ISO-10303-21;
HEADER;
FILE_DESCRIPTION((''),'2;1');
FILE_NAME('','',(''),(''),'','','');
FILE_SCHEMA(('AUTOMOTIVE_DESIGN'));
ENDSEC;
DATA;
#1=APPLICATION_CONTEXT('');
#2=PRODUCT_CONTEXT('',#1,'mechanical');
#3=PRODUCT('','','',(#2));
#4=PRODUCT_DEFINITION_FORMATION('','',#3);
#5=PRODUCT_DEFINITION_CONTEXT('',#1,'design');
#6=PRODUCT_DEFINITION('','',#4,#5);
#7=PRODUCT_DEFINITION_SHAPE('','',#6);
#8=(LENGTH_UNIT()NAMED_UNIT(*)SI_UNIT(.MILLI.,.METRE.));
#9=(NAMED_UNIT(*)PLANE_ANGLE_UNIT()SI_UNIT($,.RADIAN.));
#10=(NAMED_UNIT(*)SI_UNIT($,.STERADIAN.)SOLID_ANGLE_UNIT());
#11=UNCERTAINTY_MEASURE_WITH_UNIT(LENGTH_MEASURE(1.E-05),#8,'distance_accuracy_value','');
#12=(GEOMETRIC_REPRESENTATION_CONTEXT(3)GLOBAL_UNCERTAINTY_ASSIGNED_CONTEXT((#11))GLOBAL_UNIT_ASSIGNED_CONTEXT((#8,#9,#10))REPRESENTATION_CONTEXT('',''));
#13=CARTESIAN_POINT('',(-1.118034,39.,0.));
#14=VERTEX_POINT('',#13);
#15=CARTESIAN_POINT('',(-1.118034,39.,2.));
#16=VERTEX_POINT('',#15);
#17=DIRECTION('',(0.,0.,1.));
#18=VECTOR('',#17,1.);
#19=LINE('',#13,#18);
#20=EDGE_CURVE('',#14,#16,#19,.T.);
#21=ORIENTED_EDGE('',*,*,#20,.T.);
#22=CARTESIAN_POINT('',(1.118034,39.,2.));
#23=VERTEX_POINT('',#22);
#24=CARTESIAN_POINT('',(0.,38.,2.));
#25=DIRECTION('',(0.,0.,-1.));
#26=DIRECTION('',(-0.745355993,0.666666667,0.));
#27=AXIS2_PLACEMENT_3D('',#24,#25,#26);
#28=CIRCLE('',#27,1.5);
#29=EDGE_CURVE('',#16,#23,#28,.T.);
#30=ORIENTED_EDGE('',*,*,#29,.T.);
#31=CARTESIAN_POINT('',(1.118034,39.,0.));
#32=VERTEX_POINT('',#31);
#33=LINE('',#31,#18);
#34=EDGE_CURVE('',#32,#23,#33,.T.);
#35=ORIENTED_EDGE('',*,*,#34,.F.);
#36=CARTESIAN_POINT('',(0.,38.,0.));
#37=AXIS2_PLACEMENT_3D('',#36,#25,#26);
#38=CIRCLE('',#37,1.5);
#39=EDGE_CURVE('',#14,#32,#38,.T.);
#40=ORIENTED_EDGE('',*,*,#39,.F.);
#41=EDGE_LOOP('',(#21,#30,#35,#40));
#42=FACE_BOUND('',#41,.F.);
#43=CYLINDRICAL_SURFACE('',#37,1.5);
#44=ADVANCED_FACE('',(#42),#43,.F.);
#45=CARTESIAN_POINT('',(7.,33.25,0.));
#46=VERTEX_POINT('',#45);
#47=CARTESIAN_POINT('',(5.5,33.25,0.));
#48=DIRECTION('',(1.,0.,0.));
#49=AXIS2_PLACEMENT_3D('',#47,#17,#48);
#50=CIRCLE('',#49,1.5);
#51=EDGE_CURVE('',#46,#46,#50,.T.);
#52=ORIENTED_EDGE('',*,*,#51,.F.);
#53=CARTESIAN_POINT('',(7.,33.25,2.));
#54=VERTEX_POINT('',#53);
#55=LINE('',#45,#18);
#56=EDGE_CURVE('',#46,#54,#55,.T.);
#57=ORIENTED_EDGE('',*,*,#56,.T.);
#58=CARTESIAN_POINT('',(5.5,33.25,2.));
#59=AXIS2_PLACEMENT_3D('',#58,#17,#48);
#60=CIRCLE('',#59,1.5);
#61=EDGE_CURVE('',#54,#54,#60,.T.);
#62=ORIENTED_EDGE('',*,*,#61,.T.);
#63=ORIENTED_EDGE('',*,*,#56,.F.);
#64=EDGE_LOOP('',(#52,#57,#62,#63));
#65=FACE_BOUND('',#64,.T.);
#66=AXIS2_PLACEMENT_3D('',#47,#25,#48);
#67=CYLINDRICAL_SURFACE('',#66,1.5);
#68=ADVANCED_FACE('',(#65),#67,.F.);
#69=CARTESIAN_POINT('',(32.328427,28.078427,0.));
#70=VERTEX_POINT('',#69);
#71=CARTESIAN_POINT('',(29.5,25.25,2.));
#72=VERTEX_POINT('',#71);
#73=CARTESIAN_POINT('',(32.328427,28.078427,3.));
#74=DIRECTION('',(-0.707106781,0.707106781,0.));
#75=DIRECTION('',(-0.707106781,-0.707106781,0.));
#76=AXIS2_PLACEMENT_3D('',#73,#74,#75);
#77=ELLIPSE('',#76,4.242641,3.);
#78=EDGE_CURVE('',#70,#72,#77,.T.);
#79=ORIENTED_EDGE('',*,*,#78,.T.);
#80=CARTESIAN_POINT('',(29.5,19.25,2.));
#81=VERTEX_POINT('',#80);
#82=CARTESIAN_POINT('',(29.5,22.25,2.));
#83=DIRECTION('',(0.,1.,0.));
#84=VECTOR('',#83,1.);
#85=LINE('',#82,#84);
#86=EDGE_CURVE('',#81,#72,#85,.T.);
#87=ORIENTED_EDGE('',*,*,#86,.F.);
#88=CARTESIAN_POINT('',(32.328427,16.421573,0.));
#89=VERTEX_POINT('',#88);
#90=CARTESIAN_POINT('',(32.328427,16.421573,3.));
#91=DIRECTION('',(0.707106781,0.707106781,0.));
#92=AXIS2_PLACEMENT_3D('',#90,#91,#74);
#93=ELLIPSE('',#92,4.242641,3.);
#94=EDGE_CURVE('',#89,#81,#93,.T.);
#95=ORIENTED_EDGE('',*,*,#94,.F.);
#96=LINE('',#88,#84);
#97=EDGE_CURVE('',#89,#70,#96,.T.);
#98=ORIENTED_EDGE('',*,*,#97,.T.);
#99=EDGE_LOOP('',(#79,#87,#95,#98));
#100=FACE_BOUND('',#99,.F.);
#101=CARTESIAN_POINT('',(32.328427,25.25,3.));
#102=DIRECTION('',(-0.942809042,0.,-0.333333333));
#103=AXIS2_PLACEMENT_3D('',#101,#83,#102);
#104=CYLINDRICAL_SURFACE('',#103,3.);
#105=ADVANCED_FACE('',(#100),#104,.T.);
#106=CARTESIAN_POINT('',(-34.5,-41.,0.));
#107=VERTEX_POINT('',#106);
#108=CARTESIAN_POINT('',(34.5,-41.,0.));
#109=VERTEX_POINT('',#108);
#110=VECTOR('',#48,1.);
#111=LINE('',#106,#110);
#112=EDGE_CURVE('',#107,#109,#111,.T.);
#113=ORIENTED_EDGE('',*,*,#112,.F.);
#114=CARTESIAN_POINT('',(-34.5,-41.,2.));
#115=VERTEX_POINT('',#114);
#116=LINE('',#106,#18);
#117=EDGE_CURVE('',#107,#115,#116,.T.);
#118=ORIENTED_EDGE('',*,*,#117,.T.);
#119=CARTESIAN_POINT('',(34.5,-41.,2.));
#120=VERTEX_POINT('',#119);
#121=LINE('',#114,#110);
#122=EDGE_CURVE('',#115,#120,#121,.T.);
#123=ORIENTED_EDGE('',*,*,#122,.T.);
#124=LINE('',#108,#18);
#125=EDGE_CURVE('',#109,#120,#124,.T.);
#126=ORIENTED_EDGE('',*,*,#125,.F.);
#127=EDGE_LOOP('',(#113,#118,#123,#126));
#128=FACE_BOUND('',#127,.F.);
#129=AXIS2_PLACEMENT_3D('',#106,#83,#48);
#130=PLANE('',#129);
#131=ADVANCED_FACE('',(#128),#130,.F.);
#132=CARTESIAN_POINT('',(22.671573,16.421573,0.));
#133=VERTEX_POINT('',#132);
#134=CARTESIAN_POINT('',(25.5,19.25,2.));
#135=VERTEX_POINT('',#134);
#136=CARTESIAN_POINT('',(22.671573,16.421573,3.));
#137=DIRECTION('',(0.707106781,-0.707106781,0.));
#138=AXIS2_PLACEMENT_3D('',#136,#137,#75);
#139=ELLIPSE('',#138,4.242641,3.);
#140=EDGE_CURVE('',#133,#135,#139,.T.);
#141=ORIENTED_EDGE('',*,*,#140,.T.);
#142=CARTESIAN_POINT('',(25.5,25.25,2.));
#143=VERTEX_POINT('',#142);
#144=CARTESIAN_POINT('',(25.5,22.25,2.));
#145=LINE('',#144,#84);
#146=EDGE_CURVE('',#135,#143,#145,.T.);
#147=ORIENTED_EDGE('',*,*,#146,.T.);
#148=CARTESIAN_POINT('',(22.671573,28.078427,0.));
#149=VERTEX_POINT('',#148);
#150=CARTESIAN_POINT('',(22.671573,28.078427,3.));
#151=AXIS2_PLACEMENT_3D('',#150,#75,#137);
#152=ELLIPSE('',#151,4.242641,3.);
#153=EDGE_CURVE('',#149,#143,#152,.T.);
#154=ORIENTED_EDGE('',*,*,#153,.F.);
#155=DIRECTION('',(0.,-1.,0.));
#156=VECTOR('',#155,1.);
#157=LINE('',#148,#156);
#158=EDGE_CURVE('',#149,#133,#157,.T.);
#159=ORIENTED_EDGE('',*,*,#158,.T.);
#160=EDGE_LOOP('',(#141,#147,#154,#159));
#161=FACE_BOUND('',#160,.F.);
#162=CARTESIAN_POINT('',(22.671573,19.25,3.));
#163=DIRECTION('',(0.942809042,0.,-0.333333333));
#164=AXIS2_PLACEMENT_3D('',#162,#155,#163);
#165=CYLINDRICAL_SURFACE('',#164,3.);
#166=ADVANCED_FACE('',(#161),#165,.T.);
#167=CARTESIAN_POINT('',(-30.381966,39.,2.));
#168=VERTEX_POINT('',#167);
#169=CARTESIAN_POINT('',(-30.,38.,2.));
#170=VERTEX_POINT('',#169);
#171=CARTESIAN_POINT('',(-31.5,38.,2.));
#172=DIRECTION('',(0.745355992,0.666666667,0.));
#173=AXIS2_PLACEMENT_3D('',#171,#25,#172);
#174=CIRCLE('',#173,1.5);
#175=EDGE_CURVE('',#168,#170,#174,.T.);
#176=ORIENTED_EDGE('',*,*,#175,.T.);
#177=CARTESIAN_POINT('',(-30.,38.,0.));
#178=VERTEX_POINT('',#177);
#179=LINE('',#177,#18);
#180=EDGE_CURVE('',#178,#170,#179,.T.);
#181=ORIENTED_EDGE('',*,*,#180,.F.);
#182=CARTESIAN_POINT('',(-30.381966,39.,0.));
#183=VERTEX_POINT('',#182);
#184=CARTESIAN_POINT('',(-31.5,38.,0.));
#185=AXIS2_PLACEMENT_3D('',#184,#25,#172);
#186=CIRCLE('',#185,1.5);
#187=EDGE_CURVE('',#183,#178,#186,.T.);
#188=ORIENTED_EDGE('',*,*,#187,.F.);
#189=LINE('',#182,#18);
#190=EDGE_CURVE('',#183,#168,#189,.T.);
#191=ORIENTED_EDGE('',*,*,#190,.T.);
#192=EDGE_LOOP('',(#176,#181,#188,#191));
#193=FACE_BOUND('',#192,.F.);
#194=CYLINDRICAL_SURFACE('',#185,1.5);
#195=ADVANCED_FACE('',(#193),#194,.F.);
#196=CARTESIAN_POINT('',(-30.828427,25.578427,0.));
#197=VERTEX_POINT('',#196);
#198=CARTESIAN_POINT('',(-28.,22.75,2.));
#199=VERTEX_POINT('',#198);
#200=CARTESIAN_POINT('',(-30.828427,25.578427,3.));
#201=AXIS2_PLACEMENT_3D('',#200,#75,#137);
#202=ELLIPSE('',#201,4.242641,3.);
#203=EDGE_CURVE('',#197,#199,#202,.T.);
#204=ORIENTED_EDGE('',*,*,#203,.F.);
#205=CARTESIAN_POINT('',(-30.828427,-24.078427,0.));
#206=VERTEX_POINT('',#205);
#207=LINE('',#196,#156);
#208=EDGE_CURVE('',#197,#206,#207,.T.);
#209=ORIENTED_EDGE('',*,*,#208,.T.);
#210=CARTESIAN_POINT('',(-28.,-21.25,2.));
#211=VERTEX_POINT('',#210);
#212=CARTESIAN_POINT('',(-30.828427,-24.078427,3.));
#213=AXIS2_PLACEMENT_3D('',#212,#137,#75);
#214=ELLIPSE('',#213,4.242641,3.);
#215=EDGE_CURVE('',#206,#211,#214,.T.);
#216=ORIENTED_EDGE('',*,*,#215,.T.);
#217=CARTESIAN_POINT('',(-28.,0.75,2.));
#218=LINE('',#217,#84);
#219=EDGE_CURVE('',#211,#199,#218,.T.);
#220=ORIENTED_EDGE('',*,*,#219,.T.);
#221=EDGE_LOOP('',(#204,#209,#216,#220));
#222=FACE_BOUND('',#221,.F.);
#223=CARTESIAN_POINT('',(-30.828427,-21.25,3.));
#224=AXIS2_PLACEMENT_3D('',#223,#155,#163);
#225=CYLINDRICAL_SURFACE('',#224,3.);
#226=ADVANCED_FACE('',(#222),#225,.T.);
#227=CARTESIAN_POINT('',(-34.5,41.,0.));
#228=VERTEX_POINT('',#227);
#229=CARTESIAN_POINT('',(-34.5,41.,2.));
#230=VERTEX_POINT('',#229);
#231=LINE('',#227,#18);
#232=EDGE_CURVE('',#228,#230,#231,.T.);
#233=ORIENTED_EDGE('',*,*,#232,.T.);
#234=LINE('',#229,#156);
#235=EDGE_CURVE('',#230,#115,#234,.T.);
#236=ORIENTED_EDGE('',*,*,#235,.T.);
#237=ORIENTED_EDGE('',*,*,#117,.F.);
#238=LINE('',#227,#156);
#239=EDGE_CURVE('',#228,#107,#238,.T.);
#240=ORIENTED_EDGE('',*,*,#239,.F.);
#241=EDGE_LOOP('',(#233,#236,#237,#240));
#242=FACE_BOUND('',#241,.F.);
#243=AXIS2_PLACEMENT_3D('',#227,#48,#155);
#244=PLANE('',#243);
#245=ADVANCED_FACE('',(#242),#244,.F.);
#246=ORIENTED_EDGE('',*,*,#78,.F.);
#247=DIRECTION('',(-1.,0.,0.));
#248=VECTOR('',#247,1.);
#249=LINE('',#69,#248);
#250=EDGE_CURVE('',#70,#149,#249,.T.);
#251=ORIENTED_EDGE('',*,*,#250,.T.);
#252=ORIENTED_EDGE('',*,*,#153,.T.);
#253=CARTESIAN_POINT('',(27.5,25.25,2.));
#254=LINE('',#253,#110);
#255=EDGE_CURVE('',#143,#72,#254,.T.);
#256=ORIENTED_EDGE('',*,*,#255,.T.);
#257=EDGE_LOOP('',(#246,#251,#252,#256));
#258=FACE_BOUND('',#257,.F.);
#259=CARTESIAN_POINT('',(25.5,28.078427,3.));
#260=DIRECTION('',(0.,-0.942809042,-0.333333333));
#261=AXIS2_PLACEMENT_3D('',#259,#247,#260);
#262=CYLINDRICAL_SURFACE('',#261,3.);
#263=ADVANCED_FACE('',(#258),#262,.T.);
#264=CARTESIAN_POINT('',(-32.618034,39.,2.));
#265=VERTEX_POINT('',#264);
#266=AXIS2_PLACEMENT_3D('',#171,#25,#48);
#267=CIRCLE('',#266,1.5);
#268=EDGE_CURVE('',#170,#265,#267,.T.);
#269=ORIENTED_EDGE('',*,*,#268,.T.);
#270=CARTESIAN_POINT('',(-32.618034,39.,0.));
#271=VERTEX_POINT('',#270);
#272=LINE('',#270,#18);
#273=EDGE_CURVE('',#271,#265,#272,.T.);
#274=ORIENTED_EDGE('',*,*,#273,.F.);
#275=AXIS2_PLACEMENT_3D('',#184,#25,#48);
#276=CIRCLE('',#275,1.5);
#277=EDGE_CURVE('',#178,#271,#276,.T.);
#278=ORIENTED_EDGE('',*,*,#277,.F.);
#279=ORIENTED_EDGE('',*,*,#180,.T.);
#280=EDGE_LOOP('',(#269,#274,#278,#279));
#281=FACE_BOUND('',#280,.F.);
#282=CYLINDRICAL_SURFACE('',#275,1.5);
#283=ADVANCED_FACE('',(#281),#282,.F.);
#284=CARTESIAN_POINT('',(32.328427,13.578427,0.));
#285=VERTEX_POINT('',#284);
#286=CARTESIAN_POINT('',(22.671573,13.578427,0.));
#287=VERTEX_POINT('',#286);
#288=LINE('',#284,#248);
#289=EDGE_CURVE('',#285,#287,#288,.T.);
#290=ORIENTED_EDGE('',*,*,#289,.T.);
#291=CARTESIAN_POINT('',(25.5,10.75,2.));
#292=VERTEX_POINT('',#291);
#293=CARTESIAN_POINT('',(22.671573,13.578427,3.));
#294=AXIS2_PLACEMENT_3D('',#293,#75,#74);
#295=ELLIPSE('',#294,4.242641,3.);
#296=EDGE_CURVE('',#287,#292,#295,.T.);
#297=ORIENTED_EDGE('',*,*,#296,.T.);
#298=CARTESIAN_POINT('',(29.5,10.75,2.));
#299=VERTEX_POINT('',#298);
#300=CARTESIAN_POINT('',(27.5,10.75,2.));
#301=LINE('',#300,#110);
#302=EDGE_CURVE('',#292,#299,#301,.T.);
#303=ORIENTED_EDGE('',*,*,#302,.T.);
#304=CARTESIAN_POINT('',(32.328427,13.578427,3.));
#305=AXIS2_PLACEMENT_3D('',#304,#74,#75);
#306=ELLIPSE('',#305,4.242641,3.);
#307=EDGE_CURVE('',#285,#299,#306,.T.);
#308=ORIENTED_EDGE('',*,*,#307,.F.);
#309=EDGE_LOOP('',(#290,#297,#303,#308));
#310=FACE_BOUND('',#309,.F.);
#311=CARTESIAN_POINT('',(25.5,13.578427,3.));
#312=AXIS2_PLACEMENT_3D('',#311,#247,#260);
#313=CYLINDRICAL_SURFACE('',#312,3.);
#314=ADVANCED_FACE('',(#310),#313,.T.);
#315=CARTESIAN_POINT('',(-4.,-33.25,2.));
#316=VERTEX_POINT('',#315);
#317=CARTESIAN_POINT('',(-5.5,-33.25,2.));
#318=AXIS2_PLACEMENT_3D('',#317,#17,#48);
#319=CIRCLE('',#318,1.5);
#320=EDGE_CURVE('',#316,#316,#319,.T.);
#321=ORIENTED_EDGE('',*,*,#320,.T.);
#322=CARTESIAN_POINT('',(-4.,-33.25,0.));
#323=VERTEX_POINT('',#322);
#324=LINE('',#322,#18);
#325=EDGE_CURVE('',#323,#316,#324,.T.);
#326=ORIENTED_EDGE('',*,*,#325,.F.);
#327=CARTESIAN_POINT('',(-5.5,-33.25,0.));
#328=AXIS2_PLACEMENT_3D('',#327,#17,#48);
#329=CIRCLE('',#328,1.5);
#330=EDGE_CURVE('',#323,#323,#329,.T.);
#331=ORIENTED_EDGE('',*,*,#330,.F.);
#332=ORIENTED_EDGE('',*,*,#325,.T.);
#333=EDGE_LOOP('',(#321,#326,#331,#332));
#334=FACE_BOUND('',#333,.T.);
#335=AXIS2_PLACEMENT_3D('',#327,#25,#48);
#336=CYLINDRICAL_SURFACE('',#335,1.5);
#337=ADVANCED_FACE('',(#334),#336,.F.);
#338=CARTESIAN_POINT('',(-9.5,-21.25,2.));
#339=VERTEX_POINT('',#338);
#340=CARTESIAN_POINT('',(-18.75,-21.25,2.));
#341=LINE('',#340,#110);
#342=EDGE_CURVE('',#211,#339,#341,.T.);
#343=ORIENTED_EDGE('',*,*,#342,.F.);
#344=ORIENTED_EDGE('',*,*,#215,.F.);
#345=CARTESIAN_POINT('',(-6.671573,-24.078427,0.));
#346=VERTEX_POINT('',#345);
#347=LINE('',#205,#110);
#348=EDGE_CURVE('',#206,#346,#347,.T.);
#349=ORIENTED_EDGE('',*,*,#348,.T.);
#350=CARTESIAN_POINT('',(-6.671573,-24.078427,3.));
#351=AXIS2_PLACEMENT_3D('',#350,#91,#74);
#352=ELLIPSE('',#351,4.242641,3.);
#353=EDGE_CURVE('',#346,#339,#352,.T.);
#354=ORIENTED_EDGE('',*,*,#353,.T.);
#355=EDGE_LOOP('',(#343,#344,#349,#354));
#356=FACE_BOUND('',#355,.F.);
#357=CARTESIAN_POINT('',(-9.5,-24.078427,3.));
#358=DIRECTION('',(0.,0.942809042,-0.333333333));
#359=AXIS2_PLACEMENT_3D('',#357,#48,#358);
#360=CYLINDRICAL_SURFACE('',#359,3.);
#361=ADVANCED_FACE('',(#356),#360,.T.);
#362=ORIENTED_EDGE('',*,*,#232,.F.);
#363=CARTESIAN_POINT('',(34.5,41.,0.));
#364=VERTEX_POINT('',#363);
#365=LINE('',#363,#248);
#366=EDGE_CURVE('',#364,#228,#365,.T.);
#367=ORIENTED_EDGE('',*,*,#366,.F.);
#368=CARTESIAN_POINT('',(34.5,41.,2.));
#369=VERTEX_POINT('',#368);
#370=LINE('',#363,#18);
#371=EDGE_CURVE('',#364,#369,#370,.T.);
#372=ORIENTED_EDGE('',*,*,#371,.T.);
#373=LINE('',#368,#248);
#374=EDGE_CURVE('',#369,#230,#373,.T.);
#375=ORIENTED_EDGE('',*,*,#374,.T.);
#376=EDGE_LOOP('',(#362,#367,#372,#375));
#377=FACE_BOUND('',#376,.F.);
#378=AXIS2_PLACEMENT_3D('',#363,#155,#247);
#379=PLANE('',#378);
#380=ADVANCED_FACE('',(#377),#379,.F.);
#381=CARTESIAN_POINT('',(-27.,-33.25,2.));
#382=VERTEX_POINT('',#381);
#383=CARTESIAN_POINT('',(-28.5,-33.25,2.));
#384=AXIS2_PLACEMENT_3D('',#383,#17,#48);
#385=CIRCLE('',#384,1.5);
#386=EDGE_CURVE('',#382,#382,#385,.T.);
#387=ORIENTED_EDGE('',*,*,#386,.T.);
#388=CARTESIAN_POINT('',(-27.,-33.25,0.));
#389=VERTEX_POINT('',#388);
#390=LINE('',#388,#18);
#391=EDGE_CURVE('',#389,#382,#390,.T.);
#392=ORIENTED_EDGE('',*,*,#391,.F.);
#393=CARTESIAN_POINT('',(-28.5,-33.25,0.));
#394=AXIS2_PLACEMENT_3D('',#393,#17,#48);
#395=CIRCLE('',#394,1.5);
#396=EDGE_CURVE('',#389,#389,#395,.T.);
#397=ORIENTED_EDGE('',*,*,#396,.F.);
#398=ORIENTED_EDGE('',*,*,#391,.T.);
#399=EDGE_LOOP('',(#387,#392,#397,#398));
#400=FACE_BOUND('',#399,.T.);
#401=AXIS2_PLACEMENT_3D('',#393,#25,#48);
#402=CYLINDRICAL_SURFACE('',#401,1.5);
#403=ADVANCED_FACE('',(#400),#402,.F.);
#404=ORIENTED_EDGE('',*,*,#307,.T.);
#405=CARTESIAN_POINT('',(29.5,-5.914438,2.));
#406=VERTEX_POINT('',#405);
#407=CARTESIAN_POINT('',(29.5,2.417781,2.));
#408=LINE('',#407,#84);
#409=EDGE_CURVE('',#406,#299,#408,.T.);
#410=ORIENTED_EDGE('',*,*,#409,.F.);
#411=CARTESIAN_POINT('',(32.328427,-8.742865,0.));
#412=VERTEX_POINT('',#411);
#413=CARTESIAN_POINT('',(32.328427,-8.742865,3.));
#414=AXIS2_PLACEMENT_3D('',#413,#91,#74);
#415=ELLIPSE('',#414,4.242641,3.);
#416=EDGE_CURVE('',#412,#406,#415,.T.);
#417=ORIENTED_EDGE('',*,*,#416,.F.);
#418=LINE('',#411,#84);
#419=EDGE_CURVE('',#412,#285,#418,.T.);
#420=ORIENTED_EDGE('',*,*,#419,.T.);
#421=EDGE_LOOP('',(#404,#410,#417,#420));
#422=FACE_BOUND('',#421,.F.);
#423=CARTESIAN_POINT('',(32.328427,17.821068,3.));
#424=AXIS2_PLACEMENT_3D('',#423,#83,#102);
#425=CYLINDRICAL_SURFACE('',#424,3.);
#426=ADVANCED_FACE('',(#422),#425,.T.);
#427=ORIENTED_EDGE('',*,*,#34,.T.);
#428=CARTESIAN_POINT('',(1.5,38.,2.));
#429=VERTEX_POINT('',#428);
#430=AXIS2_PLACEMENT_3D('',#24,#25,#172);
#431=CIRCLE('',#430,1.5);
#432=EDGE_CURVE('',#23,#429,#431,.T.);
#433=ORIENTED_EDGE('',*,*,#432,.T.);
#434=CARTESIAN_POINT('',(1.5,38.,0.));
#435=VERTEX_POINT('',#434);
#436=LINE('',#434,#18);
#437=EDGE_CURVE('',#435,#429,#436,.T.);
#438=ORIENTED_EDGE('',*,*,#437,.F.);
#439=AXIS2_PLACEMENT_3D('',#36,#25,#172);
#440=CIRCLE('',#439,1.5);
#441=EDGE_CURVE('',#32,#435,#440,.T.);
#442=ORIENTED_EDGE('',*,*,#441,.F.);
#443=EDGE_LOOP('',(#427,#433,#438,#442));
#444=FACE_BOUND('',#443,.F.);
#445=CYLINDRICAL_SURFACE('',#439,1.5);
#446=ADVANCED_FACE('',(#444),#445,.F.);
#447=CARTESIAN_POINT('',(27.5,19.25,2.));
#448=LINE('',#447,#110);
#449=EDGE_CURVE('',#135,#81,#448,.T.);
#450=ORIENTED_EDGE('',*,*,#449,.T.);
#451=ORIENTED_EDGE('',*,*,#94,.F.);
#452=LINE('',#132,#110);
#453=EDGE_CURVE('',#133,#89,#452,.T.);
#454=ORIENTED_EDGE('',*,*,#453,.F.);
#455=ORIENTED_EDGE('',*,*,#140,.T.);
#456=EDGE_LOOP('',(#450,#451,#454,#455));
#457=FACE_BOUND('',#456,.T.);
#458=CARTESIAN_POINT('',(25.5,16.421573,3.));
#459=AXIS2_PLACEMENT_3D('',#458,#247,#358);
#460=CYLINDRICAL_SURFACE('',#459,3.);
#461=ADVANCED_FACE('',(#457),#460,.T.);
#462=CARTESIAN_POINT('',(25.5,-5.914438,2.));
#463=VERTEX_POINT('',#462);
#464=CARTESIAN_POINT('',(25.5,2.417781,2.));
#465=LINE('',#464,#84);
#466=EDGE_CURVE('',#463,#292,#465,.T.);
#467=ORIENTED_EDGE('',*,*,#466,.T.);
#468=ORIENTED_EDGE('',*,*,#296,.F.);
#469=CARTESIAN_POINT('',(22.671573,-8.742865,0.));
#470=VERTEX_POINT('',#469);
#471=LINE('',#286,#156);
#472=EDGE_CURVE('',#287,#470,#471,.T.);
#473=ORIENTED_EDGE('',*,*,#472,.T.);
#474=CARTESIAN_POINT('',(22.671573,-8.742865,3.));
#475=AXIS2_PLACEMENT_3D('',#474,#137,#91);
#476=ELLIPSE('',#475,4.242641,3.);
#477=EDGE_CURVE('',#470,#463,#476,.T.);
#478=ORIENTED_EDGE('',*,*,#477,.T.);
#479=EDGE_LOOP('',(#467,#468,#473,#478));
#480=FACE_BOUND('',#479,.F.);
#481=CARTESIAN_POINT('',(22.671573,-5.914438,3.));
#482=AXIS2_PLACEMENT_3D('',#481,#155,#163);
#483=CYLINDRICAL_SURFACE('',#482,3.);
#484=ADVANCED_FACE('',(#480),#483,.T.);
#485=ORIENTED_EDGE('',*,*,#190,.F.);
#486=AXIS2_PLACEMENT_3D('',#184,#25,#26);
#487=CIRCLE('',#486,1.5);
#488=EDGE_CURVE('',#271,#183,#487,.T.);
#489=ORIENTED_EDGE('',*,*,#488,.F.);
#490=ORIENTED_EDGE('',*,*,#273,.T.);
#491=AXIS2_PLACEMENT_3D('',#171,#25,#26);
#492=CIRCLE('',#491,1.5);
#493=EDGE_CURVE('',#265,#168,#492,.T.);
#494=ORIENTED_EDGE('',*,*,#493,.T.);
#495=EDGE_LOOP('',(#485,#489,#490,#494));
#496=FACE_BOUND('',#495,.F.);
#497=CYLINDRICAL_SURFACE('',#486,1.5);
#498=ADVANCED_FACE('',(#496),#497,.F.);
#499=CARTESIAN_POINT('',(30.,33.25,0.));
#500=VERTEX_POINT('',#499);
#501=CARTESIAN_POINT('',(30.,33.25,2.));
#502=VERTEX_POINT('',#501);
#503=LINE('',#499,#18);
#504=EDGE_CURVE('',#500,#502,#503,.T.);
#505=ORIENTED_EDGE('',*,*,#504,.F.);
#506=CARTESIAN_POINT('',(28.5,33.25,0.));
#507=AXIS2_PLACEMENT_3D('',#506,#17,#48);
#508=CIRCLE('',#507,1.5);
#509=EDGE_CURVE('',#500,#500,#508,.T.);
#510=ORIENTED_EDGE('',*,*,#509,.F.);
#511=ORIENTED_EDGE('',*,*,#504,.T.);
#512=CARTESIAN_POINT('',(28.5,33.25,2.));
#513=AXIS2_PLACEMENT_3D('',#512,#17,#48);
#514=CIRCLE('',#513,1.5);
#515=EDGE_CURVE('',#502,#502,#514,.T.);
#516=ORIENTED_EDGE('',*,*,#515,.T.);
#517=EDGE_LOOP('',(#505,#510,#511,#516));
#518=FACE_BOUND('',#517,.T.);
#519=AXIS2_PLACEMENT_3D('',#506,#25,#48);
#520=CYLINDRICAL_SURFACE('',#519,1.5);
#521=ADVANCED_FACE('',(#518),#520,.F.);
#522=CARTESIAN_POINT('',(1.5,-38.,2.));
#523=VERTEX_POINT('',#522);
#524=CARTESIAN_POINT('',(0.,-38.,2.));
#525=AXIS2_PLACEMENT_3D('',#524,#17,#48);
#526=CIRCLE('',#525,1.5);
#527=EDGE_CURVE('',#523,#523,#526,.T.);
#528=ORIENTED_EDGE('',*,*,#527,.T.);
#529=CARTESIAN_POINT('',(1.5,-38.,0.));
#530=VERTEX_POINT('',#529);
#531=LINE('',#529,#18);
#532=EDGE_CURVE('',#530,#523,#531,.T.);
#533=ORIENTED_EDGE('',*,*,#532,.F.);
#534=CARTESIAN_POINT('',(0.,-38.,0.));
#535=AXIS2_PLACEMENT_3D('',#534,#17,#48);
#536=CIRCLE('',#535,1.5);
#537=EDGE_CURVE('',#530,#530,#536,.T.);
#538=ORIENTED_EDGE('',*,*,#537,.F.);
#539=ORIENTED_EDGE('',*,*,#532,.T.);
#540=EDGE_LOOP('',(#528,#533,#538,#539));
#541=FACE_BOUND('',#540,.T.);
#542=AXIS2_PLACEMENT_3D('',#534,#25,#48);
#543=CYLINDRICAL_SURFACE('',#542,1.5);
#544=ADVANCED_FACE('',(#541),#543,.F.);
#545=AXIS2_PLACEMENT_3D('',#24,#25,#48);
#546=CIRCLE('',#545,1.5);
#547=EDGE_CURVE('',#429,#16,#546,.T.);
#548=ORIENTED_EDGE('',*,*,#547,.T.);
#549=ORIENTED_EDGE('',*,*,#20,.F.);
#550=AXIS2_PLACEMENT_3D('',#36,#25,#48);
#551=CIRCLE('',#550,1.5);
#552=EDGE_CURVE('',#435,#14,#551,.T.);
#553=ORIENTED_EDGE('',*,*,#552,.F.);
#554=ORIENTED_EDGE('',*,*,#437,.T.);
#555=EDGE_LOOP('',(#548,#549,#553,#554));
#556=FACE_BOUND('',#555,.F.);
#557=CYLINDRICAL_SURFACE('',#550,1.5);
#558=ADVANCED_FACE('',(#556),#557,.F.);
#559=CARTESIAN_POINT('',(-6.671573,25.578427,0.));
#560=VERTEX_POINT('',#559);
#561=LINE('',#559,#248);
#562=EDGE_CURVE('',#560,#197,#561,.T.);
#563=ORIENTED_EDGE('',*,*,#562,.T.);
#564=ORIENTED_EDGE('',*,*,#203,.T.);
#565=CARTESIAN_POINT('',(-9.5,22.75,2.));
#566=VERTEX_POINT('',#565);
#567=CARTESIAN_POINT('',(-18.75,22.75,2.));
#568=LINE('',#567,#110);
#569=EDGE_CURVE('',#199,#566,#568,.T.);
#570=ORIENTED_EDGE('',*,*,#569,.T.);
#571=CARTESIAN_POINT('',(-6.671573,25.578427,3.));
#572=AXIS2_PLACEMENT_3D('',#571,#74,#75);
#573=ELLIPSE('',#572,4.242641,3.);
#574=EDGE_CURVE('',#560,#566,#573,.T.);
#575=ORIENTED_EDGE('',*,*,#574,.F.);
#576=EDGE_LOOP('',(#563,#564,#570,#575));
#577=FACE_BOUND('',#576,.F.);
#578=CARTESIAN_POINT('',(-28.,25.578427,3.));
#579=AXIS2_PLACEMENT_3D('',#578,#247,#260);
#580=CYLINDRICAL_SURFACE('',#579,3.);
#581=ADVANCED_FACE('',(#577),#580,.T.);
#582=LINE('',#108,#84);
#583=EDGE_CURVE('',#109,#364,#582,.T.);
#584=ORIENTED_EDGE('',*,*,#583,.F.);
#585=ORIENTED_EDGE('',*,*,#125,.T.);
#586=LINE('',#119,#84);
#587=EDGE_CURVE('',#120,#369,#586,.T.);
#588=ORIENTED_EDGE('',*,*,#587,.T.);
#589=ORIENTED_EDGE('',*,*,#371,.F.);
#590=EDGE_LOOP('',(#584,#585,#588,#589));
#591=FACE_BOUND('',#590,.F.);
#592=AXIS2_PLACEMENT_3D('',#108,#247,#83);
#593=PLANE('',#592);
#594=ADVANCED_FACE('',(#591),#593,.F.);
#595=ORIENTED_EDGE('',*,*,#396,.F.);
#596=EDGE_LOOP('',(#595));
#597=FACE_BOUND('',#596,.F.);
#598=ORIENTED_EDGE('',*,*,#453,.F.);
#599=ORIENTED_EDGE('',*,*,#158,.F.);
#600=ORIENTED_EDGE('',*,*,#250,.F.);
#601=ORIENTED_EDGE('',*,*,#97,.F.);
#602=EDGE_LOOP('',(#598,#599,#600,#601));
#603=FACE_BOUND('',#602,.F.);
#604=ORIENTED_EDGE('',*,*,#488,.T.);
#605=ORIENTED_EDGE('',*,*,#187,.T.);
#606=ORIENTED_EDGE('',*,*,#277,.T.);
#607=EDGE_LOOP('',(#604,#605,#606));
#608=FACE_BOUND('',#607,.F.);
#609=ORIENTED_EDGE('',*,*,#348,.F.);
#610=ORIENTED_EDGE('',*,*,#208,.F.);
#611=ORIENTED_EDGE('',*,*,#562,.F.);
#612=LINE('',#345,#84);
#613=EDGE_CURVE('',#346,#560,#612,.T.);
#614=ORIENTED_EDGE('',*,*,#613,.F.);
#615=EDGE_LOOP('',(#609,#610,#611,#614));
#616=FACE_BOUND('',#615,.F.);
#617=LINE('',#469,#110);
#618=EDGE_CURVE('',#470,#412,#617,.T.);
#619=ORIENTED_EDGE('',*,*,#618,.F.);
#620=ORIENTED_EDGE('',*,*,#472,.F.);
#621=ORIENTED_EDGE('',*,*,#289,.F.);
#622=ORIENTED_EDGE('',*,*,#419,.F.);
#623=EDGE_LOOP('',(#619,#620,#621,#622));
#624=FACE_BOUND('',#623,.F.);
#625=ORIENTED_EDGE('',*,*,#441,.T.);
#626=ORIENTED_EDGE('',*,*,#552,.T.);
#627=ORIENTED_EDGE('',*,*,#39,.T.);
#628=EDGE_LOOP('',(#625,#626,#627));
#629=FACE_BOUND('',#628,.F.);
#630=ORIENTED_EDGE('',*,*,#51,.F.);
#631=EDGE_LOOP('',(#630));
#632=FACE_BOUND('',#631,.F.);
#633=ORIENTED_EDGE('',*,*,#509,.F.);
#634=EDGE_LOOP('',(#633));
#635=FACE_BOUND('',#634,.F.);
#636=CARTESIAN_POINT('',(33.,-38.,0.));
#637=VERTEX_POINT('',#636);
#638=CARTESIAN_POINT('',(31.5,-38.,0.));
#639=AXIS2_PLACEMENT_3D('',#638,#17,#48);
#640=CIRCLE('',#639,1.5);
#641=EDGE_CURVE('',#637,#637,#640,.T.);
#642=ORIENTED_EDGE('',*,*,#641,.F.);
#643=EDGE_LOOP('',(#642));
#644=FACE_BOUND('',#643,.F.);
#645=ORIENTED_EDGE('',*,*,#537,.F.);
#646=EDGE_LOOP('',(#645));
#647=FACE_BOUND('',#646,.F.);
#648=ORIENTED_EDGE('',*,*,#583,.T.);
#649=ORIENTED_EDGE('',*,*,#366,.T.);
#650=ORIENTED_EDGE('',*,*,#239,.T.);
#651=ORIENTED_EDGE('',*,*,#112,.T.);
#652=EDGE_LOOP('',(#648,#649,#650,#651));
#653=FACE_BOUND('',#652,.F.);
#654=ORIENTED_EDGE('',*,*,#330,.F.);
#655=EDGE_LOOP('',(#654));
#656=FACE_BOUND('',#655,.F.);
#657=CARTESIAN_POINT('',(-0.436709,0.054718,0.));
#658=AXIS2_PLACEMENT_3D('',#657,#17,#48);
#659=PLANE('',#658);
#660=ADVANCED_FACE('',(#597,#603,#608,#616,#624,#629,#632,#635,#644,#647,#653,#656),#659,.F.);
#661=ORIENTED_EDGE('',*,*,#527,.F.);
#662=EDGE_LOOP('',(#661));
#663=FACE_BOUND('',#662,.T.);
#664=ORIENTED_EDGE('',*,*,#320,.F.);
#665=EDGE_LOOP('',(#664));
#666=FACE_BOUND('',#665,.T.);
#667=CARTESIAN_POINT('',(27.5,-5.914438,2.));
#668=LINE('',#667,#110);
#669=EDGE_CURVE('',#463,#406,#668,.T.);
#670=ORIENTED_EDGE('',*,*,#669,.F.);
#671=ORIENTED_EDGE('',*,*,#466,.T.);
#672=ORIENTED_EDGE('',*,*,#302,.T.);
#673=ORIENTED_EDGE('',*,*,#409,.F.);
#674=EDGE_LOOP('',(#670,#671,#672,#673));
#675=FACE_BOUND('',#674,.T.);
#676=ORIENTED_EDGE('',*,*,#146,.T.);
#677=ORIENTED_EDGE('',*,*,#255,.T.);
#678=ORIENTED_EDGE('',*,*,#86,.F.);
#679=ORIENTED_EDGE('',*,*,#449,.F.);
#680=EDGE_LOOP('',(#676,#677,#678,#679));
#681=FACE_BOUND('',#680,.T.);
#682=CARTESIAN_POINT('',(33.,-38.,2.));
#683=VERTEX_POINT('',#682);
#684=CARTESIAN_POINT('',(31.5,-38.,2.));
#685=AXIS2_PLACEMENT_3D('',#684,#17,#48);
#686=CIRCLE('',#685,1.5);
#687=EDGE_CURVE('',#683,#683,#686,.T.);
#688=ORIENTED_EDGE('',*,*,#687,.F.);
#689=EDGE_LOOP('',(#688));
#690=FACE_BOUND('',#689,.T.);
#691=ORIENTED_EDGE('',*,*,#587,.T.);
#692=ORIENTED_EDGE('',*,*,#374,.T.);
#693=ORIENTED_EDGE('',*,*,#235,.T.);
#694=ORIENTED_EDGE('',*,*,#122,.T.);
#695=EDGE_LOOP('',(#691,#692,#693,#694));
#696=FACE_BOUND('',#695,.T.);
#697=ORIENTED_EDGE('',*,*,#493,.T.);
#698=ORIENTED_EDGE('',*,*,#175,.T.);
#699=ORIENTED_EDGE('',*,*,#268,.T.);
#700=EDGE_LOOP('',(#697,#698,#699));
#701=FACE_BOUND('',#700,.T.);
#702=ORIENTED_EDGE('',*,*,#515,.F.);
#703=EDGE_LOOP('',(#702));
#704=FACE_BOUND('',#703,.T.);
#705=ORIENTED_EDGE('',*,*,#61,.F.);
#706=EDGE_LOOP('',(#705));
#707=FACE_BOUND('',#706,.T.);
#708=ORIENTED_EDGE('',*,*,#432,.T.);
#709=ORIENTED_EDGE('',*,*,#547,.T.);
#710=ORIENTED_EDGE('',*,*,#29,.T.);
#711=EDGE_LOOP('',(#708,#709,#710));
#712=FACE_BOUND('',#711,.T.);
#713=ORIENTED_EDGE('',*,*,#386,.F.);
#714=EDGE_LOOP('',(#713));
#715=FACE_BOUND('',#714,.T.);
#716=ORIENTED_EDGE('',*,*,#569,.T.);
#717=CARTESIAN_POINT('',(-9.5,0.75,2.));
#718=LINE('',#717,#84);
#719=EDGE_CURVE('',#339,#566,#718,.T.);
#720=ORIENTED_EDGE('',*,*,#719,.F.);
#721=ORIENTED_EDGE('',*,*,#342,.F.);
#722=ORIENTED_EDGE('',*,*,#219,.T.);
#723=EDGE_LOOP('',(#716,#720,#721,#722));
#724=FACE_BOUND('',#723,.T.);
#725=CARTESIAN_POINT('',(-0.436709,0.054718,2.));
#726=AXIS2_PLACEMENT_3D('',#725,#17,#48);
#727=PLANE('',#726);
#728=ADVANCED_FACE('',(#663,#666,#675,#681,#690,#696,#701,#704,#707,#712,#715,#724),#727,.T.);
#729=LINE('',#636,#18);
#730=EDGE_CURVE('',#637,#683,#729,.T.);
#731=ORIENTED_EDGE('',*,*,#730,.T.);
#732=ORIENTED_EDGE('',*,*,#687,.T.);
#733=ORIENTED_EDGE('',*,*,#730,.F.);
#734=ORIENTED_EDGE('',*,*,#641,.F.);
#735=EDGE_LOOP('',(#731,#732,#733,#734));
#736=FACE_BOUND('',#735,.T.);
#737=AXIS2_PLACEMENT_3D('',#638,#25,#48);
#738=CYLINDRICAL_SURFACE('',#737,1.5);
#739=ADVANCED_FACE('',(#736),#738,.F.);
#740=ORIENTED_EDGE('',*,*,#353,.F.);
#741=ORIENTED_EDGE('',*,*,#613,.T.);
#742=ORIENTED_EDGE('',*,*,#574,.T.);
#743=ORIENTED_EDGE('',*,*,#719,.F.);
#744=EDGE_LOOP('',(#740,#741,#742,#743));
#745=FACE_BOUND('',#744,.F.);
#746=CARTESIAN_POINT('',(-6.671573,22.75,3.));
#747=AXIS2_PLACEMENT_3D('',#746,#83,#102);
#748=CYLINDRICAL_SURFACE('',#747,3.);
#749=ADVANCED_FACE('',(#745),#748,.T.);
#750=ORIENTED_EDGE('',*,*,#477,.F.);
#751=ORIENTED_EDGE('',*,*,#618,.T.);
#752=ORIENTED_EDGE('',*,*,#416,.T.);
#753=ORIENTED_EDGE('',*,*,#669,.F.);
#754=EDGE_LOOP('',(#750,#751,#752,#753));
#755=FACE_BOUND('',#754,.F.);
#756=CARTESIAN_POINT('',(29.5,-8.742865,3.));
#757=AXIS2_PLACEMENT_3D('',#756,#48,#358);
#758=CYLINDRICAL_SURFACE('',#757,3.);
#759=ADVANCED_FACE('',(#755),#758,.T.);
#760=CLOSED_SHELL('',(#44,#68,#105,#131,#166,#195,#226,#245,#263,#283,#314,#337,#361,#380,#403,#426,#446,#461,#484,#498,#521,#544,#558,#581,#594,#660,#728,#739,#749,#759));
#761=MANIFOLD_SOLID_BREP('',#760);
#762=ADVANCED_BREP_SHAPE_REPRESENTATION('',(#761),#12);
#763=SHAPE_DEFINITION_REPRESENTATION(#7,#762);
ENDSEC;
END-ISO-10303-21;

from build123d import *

# Parameters (mm, degrees)
F0_R          = 1.5
F0_W          = 18.5
F0_H          = 44
F0_W_2        = 4
F0_H_2        = 16.6644380502
F0_H_3        = 6
F0_W_3        = 4.7
F0_H_4        = 2
F0_W_4        = 13
F0_W_5        = 2.3
F0_W_6        = 1.5
F0_W_7        = 9
F0_W_8        = 11
F1_DEPTH      = 2
F2_T1_DEPTH   = 16.6644380502
F2_T3_DEPTH   = 4
F2_T5_DEPTH   = 6
F2_T7_DEPTH   = 44
F2_T9_DEPTH   = 18.5
F2_T15_DEPTH  = 11.0710678119
F2_T19_DEPTH  = 23.7355058621
F2_T26_DEPTH  = 11.0710678119
F2_T30_DEPTH  = 23.7355058621
F2_T37_DEPTH  = 23.7355058621
F2_T41_DEPTH  = 11.0710678119
F2_T49_DEPTH  = 11.0710678119
F2_T54_DEPTH  = 23.7355058621
F2_T61_DEPTH  = 13.0710678119
F2_T65_DEPTH  = 11.0710678119
F2_T73_DEPTH  = 13.0710678119
F2_T77_DEPTH  = 11.0710678119
F2_T84_DEPTH  = 11.0710678119
F2_T89_DEPTH  = 13.0710678119
F2_S91_R      = 1.5
F2_T92_DEPTH  = 8
F2_T98_DEPTH  = 13.0710678119
F2_T102_DEPTH = 11.0710678119
F2_T109_DEPTH = 25.5710678119
F2_T113_DEPTH = 51.0710678119
F2_T120_DEPTH = 51.0710678119
F2_T124_DEPTH = 25.5710678119
F2_T131_DEPTH = 51.0710678119
F2_T135_DEPTH = 25.5710678119
F2_T143_DEPTH = 51.0710678119
F2_T147_DEPTH = 25.5710678119


# Not quite as in the source:
# - a fillet or chamfer that OpenCascade refuses, or shapes differently, is made with other operations: its cross-section is extruded or revolved along the edge and cut away or added


with BuildPart() as f1:
    # F0 (on Top) → F1 (new body)
    with BuildSketch(Plane.XY):
        with BuildLine():
            Line((12.5, -41), (34.5, -41))
            Line((34.5, -41), (34.5, 39))
            Line((34.5, 39), (28.5, 39))
            Line((28.5, 39), (25.5, 39))
            Line((25.5, 39), (20.8, 39))
            Line((20.8, 39), (7.8, 39))
            Line((7.8, 39), (5.5, 39))
            Line((5.5, 39), (1.1180339887, 39))
            ThreePointArc((1.1180339887, 39), (1.4012585384, 38.5352331347), (1.5, 38))
            ThreePointArc((1.5, 38), (-0.5352331347, 36.5987414616), (-1.1180339887, 39))
            Line((-1.1180339887, 39), (-5.5, 39))
            Line((-5.5, 39), (-14.5, 39))
            Line((-14.5, 39), (-25.5, 39))
            Line((-25.5, 39), (-27, 39))
            Line((-27, 39), (-28.5, 39))
            Line((-28.5, 39), (-30.3819660113, 39))
            ThreePointArc((-30.3819660113, 39), (-30.0987414616, 38.5352331347), (-30, 38))
            ThreePointArc((-30, 38), (-32.0352331347, 36.5987414616), (-32.6180339887, 39))
            Line((-32.6180339887, 39), (-34.5, 39))
            Line((-34.5, 39), (-34.5, -41))
            Line((-34.5, -41), (-12.5, -41))
            Line((-12.5, -41), (-10.5, -41))
            Line((-10.5, -41), (10.5, -41))
            Line((10.5, -41), (12.5, -41))
        make_face()
        with Locations((-28.5, -33.25)):
            Circle(F0_R, mode=Mode.SUBTRACT)
        with Locations((-5.5, -33.25)):
            Circle(F0_R, mode=Mode.SUBTRACT)
        with Locations((0, -38)):
            Circle(F0_R, mode=Mode.SUBTRACT)
        with Locations((31.5, -38)):
            Circle(F0_R, mode=Mode.SUBTRACT)
        with Locations((-18.75, 0.75)):
            Rectangle(F0_W, F0_H, mode=Mode.SUBTRACT)
        with Locations((-28.5, 33.25)):
            Circle(F0_R, mode=Mode.SUBTRACT)
        with Locations((-5.5, 33.25)):
            Circle(F0_R, mode=Mode.SUBTRACT)
        with Locations((27.5, 2.4177809749)):
            Rectangle(F0_W_2, F0_H_2, mode=Mode.SUBTRACT)
        with Locations((5.5, 33.25)):
            Circle(F0_R, mode=Mode.SUBTRACT)
        with Locations((27.5, 22.25)):
            Rectangle(F0_W_2, F0_H_3, mode=Mode.SUBTRACT)
        with Locations((28.5, 33.25)):
            Circle(F0_R, mode=Mode.SUBTRACT)
        Polygon((28.5, 39), (34.5, 39), (34.5, 41), (28, 41), (25.5, 41), (25.5, 39), align=None)
        with Locations((23.15, 40)):
            Rectangle(F0_W_3, F0_H_4)
        with Locations((14.3, 40)):
            Rectangle(F0_W_4, F0_H_4)
        with Locations((6.65, 40)):
            Rectangle(F0_W_5, F0_H_4)
        with BuildLine():
            Line((-34.5, 41), (-34.5, 39))
            Line((-34.5, 39), (-32.6180339887, 39))
            ThreePointArc((-32.6180339887, 39), (-31.5, 39.5), (-30.3819660113, 39))
            Line((-30.3819660113, 39), (-28.5, 39))
            Line((-28.5, 39), (-27, 39))
            Line((-27, 39), (-27, 41))
            Line((-27, 41), (-34.5, 41))
        make_face()
        with BuildLine():
            Line((1.1180339887, 39), (5.5, 39))
            Line((5.5, 39), (5.5, 41))
            Line((5.5, 41), (-5.5, 41))
            Line((-5.5, 41), (-5.5, 39))
            Line((-5.5, 39), (-1.1180339887, 39))
            ThreePointArc((-1.1180339887, 39), (0, 39.5), (1.1180339887, 39))
        make_face()
        with Locations((-26.25, 40)):
            Rectangle(F0_W_6, F0_H_4)
        with Locations((-10, 40)):
            Rectangle(F0_W_7, F0_H_4)
        with Locations((-20, 40)):
            Rectangle(F0_W_8, F0_H_4)
        with Locations((-28.5, 33.25)):
            Circle(F0_R)
        with Locations((-5.5, 33.25)):
            Circle(F0_R)
    extrude(amount=F1_DEPTH)

    # F2: fillet of radius 3 on 12 edges, made by hand

    # F2_s2 → F2_t1 (cut)
    with BuildSketch(Plane.XZ.offset(-10.75)):
        with BuildLine():
            ThreePointArc((25.5, 2), (24.4036236828, 0.5505102572), (22.6715728753, 0))
            Line((22.6715728753, 0), (25.5, 0))
            Line((25.5, 0), (25.5, 2))
        make_face()
        with BuildLine():
            ThreePointArc((29.5, 2), (30.5963763172, 0.5505102572), (32.3284271247, 0))
            Line((32.3284271247, 0), (29.5, 0))
            Line((29.5, 0), (29.5, 2))
        make_face()
    extrude(amount=F2_T1_DEPTH, mode=Mode.SUBTRACT)

    # F2_s4 → F2_t3 (cut)
    with BuildSketch(Plane.YZ.offset(25.5)):
        with BuildLine():
            ThreePointArc((-5.9144380502, 2), (-7.0108143674, 0.5505102572), (-8.742865175, 0))
            Line((-8.742865175, 0), (-5.9144380502, 0))
            Line((-5.9144380502, 0), (-5.9144380502, 2))
        make_face()
        with BuildLine():
            ThreePointArc((10.75, 2), (11.8463763172, 0.5505102572), (13.5784271247, 0))
            Line((13.5784271247, 0), (10.75, 0))
            Line((10.75, 0), (10.75, 2))
        make_face()
        with BuildLine():
            ThreePointArc((19.25, 2), (18.1536236828, 0.5505102572), (16.4215728753, 0))
            Line((16.4215728753, 0), (19.25, 0))
            Line((19.25, 0), (19.25, 2))
        make_face()
        with BuildLine():
            ThreePointArc((25.25, 2), (26.3463763172, 0.5505102572), (28.0784271247, 0))
            Line((28.0784271247, 0), (25.25, 0))
            Line((25.25, 0), (25.25, 2))
        make_face()
    extrude(amount=F2_T3_DEPTH, mode=Mode.SUBTRACT)

    # F2_s6 → F2_t5 (cut)
    with BuildSketch(Plane.XZ.offset(-25.25)):
        with BuildLine():
            ThreePointArc((29.5, 2), (30.5963763172, 0.5505102572), (32.3284271247, 0))
            Line((32.3284271247, 0), (29.5, 0))
            Line((29.5, 0), (29.5, 2))
        make_face()
        with BuildLine():
            ThreePointArc((25.5, 2), (24.4036236828, 0.5505102572), (22.6715728753, 0))
            Line((22.6715728753, 0), (25.5, 0))
            Line((25.5, 0), (25.5, 2))
        make_face()
    extrude(amount=F2_T5_DEPTH, mode=Mode.SUBTRACT)

    # F2_s8 → F2_t7 (cut)
    with BuildSketch(Plane.XZ.offset(-22.75)):
        with BuildLine():
            ThreePointArc((-9.5, 2), (-8.4036236828, 0.5505102572), (-6.6715728753, 0))
            Line((-6.6715728753, 0), (-9.5, 0))
            Line((-9.5, 0), (-9.5, 2))
        make_face()
        with BuildLine():
            ThreePointArc((-28, 2), (-29.0963763172, 0.5505102572), (-30.8284271247, 0))
            Line((-30.8284271247, 0), (-28, 0))
            Line((-28, 0), (-28, 2))
        make_face()
    extrude(amount=F2_T7_DEPTH, mode=Mode.SUBTRACT)

    # F2_s10 → F2_t9 (cut)
    with BuildSketch(Plane.YZ.offset(-28)):
        with BuildLine():
            ThreePointArc((-21.25, 2), (-22.3463763172, 0.5505102572), (-24.0784271247, 0))
            Line((-24.0784271247, 0), (-21.25, 0))
            Line((-21.25, 0), (-21.25, 2))
        make_face()
        with BuildLine():
            ThreePointArc((22.75, 2), (23.8463763172, 0.5505102572), (25.5784271247, 0))
            Line((25.5784271247, 0), (22.75, 0))
            Line((22.75, 0), (22.75, 2))
        make_face()
    extrude(amount=F2_T9_DEPTH, mode=Mode.SUBTRACT)


with BuildPart() as f2_tool13:
    # F2_s14 → F2_t15 (new body)
    with BuildSketch(Plane.YZ.offset(29.5)):
        with BuildLine():
            ThreePointArc((-5.9144380502, 2), (-7.0108143674, 0.5505102572), (-8.742865175, 0))
            Line((-8.742865175, 0), (-5.9144380502, 0))
            Line((-5.9144380502, 0), (-5.9144380502, 2))
        make_face()
    extrude(amount=-F2_T15_DEPTH)

    split(bisect_by=Plane.YZ.offset(25.5), keep=Keep.BOTTOM)


with BuildPart() as f2_tool17:
    # F2_s18 → F2_t19 (new body)
    with BuildSketch(Plane.XZ.offset(12.9855058621)):
        with BuildLine():
            ThreePointArc((25.5, 2), (24.4036236828, 0.5505102572), (22.6715728753, 0))
            Line((22.6715728753, 0), (25.5, 0))
            Line((25.5, 0), (25.5, 2))
        make_face()
    extrude(amount=-F2_T19_DEPTH)

    split(bisect_by=Plane.XZ.offset(5.9144380502), keep=Keep.TOP)


with BuildPart() as f2_tool13_1:
    add(f2_tool13.part)

    # F2_t21: intersect F2_tool17
    add(f2_tool17.part, mode=Mode.INTERSECT)


with BuildPart() as f1_1:
    add(f1.part)

    # F2_t11: cut F2_tool13
    add(f2_tool13_1.part, mode=Mode.SUBTRACT)


with BuildPart() as f2_tool24:
    # F2_s25 → F2_t26 (new body)
    with BuildSketch(Plane.YZ.offset(18.4289321881)):
        with BuildLine():
            ThreePointArc((10.75, 2), (11.8463763172, 0.5505102572), (13.5784271247, 0))
            Line((13.5784271247, 0), (10.75, 0))
            Line((10.75, 0), (10.75, 2))
        make_face()
    extrude(amount=F2_T26_DEPTH)

    split(bisect_by=Plane.YZ.offset(25.5), keep=Keep.BOTTOM)


with BuildPart() as f2_tool28:
    # F2_s29 → F2_t30 (new body)
    with BuildSketch(Plane.XZ.offset(5.9144380502)):
        with BuildLine():
            ThreePointArc((25.5, 2), (24.4036236828, 0.5505102572), (22.6715728753, 0))
            Line((22.6715728753, 0), (25.5, 0))
            Line((25.5, 0), (25.5, 2))
        make_face()
    extrude(amount=-F2_T30_DEPTH)

    split(bisect_by=Plane.XZ.offset(-10.75), keep=Keep.BOTTOM)


with BuildPart() as f2_tool24_1:
    add(f2_tool24.part)

    # F2_t32: intersect F2_tool28
    add(f2_tool28.part, mode=Mode.INTERSECT)


with BuildPart() as f1_2:
    add(f1_1.part)

    # F2_t22: cut F2_tool24
    add(f2_tool24_1.part, mode=Mode.SUBTRACT)


with BuildPart() as f2_tool35:
    # F2_s36 → F2_t37 (new body)
    with BuildSketch(Plane.XZ.offset(-10.75)):
        with BuildLine():
            ThreePointArc((29.5, 2), (30.5963763172, 0.5505102572), (32.3284271247, 0))
            Line((32.3284271247, 0), (29.5, 0))
            Line((29.5, 0), (29.5, 2))
        make_face()
    extrude(amount=F2_T37_DEPTH)

    split(bisect_by=Plane.XZ.offset(5.9144380502), keep=Keep.TOP)


with BuildPart() as f2_tool39:
    # F2_s40 → F2_t41 (new body)
    with BuildSketch(Plane.YZ.offset(36.5710678119)):
        with BuildLine():
            ThreePointArc((-5.9144380502, 2), (-7.0108143674, 0.5505102572), (-8.742865175, 0))
            Line((-8.742865175, 0), (-5.9144380502, 0))
            Line((-5.9144380502, 0), (-5.9144380502, 2))
        make_face()
    extrude(amount=-F2_T41_DEPTH)

    split(bisect_by=Plane.YZ.offset(34.5), keep=Keep.BOTTOM)

    split(bisect_by=Plane.YZ.offset(29.5), keep=Keep.TOP)


with BuildPart() as f2_tool35_1:
    add(f2_tool35.part)

    # F2_t44: intersect F2_tool39
    add(f2_tool39.part, mode=Mode.INTERSECT)


with BuildPart() as f1_3:
    add(f1_2.part)

    # F2_t33: cut F2_tool35
    add(f2_tool35_1.part, mode=Mode.SUBTRACT)


with BuildPart() as f2_tool47:
    # F2_s48 → F2_t49 (new body)
    with BuildSketch(Plane.YZ.offset(25.5)):
        with BuildLine():
            ThreePointArc((10.75, 2), (11.8463763172, 0.5505102572), (13.5784271247, 0))
            Line((13.5784271247, 0), (10.75, 0))
            Line((10.75, 0), (10.75, 2))
        make_face()
    extrude(amount=F2_T49_DEPTH)

    split(bisect_by=Plane.YZ.offset(34.5), keep=Keep.BOTTOM)

    split(bisect_by=Plane.YZ.offset(29.5), keep=Keep.TOP)


with BuildPart() as f2_tool52:
    # F2_s53 → F2_t54 (new body)
    with BuildSketch(Plane.XZ.offset(-17.8210678119)):
        with BuildLine():
            ThreePointArc((29.5, 2), (30.5963763172, 0.5505102572), (32.3284271247, 0))
            Line((32.3284271247, 0), (29.5, 0))
            Line((29.5, 0), (29.5, 2))
        make_face()
    extrude(amount=F2_T54_DEPTH)

    split(bisect_by=Plane.XZ.offset(-10.75), keep=Keep.BOTTOM)


with BuildPart() as f2_tool47_1:
    add(f2_tool47.part)

    # F2_t56: intersect F2_tool52
    add(f2_tool52.part, mode=Mode.INTERSECT)


with BuildPart() as f1_4:
    add(f1_3.part)

    # F2_t45: cut F2_tool47
    add(f2_tool47_1.part, mode=Mode.SUBTRACT)


with BuildPart() as f2_tool59:
    # F2_s60 → F2_t61 (new body)
    with BuildSketch(Plane.XZ.offset(-25.25)):
        with BuildLine():
            ThreePointArc((29.5, 2), (30.5963763172, 0.5505102572), (32.3284271247, 0))
            Line((32.3284271247, 0), (29.5, 0))
            Line((29.5, 0), (29.5, 2))
        make_face()
    extrude(amount=F2_T61_DEPTH)

    split(bisect_by=Plane.XZ.offset(-19.25), keep=Keep.TOP)


with BuildPart() as f2_tool63:
    # F2_s64 → F2_t65 (new body)
    with BuildSketch(Plane.YZ.offset(36.5710678119)):
        with BuildLine():
            ThreePointArc((19.25, 2), (18.1536236828, 0.5505102572), (16.4215728753, 0))
            Line((16.4215728753, 0), (19.25, 0))
            Line((19.25, 0), (19.25, 2))
        make_face()
    extrude(amount=-F2_T65_DEPTH)

    split(bisect_by=Plane.YZ.offset(34.5), keep=Keep.BOTTOM)

    split(bisect_by=Plane.YZ.offset(29.5), keep=Keep.TOP)


with BuildPart() as f2_tool59_1:
    add(f2_tool59.part)

    # F2_t68: intersect F2_tool63
    add(f2_tool63.part, mode=Mode.INTERSECT)


with BuildPart() as f1_5:
    add(f1_4.part)

    # F2_t57: cut F2_tool59
    add(f2_tool59_1.part, mode=Mode.SUBTRACT)


with BuildPart() as f2_tool71:
    # F2_s72 → F2_t73 (new body)
    with BuildSketch(Plane.XZ.offset(-12.1789321881)):
        with BuildLine():
            ThreePointArc((25.5, 2), (24.4036236828, 0.5505102572), (22.6715728753, 0))
            Line((22.6715728753, 0), (25.5, 0))
            Line((25.5, 0), (25.5, 2))
        make_face()
    extrude(amount=-F2_T73_DEPTH)

    split(bisect_by=Plane.XZ.offset(-19.25), keep=Keep.TOP)


with BuildPart() as f2_tool75:
    # F2_s76 → F2_t77 (new body)
    with BuildSketch(Plane.YZ.offset(29.5)):
        with BuildLine():
            ThreePointArc((19.25, 2), (18.1536236828, 0.5505102572), (16.4215728753, 0))
            Line((16.4215728753, 0), (19.25, 0))
            Line((19.25, 0), (19.25, 2))
        make_face()
    extrude(amount=-F2_T77_DEPTH)

    split(bisect_by=Plane.YZ.offset(25.5), keep=Keep.BOTTOM)


with BuildPart() as f2_tool71_1:
    add(f2_tool71.part)

    # F2_t79: intersect F2_tool75
    add(f2_tool75.part, mode=Mode.INTERSECT)


with BuildPart() as f1_6:
    add(f1_5.part)

    # F2_t69: cut F2_tool71
    add(f2_tool71_1.part, mode=Mode.SUBTRACT)


with BuildPart() as f2_tool82:
    # F2_s83 → F2_t84 (new body)
    with BuildSketch(Plane.YZ.offset(25.5)):
        with BuildLine():
            ThreePointArc((25.25, 2), (26.3463763172, 0.5505102572), (28.0784271247, 0))
            Line((28.0784271247, 0), (25.25, 0))
            Line((25.25, 0), (25.25, 2))
        make_face()
    extrude(amount=F2_T84_DEPTH)

    split(bisect_by=Plane.YZ.offset(34.5), keep=Keep.BOTTOM)

    split(bisect_by=Plane.YZ.offset(29.5), keep=Keep.TOP)


with BuildPart() as f2_tool87:
    # F2_s88 → F2_t89 (new body)
    with BuildSketch(Plane.XZ.offset(-32.3210678119)):
        with BuildLine():
            ThreePointArc((29.5, 2), (30.5963763172, 0.5505102572), (32.3284271247, 0))
            Line((32.3284271247, 0), (29.5, 0))
            Line((29.5, 0), (29.5, 2))
        make_face()
    extrude(amount=F2_T89_DEPTH)

    split(bisect_by=Plane.XZ.offset(-25.25), keep=Keep.BOTTOM)

    # F2_s91 → F2_t92 (cut, symmetric)
    with BuildSketch(Plane.XY.offset(1)):
        with Locations((28.5, 33.25)):
            Circle(F2_S91_R)
    extrude(amount=F2_T92_DEPTH, both=True, mode=Mode.SUBTRACT)


with BuildPart() as f2_tool82_1:
    add(f2_tool82.part)

    # F2_t93: intersect F2_tool87
    add(f2_tool87.part, mode=Mode.INTERSECT)


with BuildPart() as f1_7:
    add(f1_6.part)

    # F2_t80: cut F2_tool82
    add(f2_tool82_1.part, mode=Mode.SUBTRACT)


with BuildPart() as f2_tool96:
    # F2_s97 → F2_t98 (new body)
    with BuildSketch(Plane.XZ.offset(-19.25)):
        with BuildLine():
            ThreePointArc((25.5, 2), (24.4036236828, 0.5505102572), (22.6715728753, 0))
            Line((22.6715728753, 0), (25.5, 0))
            Line((25.5, 0), (25.5, 2))
        make_face()
    extrude(amount=-F2_T98_DEPTH)

    split(bisect_by=Plane.XZ.offset(-25.25), keep=Keep.BOTTOM)


with BuildPart() as f2_tool100:
    # F2_s101 → F2_t102 (new body)
    with BuildSketch(Plane.YZ.offset(18.4289321881)):
        with BuildLine():
            ThreePointArc((25.25, 2), (26.3463763172, 0.5505102572), (28.0784271247, 0))
            Line((28.0784271247, 0), (25.25, 0))
            Line((25.25, 0), (25.25, 2))
        make_face()
    extrude(amount=F2_T102_DEPTH)

    split(bisect_by=Plane.YZ.offset(25.5), keep=Keep.BOTTOM)


with BuildPart() as f2_tool96_1:
    add(f2_tool96.part)

    # F2_t104: intersect F2_tool100
    add(f2_tool100.part, mode=Mode.INTERSECT)


with BuildPart() as f1_8:
    add(f1_7.part)

    # F2_t94: cut F2_tool96
    add(f2_tool96_1.part, mode=Mode.SUBTRACT)


with BuildPart() as f2_tool107:
    # F2_s108 → F2_t109 (new body)
    with BuildSketch(Plane.YZ.offset(-28)):
        with BuildLine():
            ThreePointArc((22.75, 2), (23.8463763172, 0.5505102572), (25.5784271247, 0))
            Line((25.5784271247, 0), (22.75, 0))
            Line((22.75, 0), (22.75, 2))
        make_face()
    extrude(amount=F2_T109_DEPTH)

    split(bisect_by=Plane.YZ.offset(-9.5), keep=Keep.TOP)


with BuildPart() as f2_tool111:
    # F2_s112 → F2_t113 (new body)
    with BuildSketch(Plane.XZ.offset(-29.8210678119)):
        with BuildLine():
            ThreePointArc((-9.5, 2), (-8.4036236828, 0.5505102572), (-6.6715728753, 0))
            Line((-6.6715728753, 0), (-9.5, 0))
            Line((-9.5, 0), (-9.5, 2))
        make_face()
    extrude(amount=F2_T113_DEPTH)

    split(bisect_by=Plane.XZ.offset(-22.75), keep=Keep.BOTTOM)


with BuildPart() as f2_tool107_1:
    add(f2_tool107.part)

    # F2_t115: intersect F2_tool111
    add(f2_tool111.part, mode=Mode.INTERSECT)


with BuildPart() as f1_9:
    add(f1_8.part)

    # F2_t105: cut F2_tool107
    add(f2_tool107_1.part, mode=Mode.SUBTRACT)


with BuildPart() as f2_tool118:
    # F2_s119 → F2_t120 (new body)
    with BuildSketch(Plane.XZ.offset(-22.75)):
        with BuildLine():
            ThreePointArc((-9.5, 2), (-8.4036236828, 0.5505102572), (-6.6715728753, 0))
            Line((-6.6715728753, 0), (-9.5, 0))
            Line((-9.5, 0), (-9.5, 2))
        make_face()
    extrude(amount=F2_T120_DEPTH)

    split(bisect_by=Plane.XZ.offset(21.25), keep=Keep.TOP)


with BuildPart() as f2_tool122:
    # F2_s123 → F2_t124 (new body)
    with BuildSketch(Plane.YZ.offset(-2.4289321881)):
        with BuildLine():
            ThreePointArc((-21.25, 2), (-22.3463763172, 0.5505102572), (-24.0784271247, 0))
            Line((-24.0784271247, 0), (-21.25, 0))
            Line((-21.25, 0), (-21.25, 2))
        make_face()
    extrude(amount=-F2_T124_DEPTH)

    split(bisect_by=Plane.YZ.offset(-9.5), keep=Keep.TOP)


with BuildPart() as f2_tool118_1:
    add(f2_tool118.part)

    # F2_t126: intersect F2_tool122
    add(f2_tool122.part, mode=Mode.INTERSECT)


with BuildPart() as f1_10:
    add(f1_9.part)

    # F2_t116: cut F2_tool118
    add(f2_tool118_1.part, mode=Mode.SUBTRACT)


with BuildPart() as f2_tool129:
    # F2_s130 → F2_t131 (new body)
    with BuildSketch(Plane.XZ.offset(28.3210678119)):
        with BuildLine():
            ThreePointArc((-28, 2), (-29.0963763172, 0.5505102572), (-30.8284271247, 0))
            Line((-30.8284271247, 0), (-28, 0))
            Line((-28, 0), (-28, 2))
        make_face()
    extrude(amount=-F2_T131_DEPTH)

    split(bisect_by=Plane.XZ.offset(21.25), keep=Keep.TOP)


with BuildPart() as f2_tool133:
    # F2_s134 → F2_t135 (new body)
    with BuildSketch(Plane.YZ.offset(-9.5)):
        with BuildLine():
            ThreePointArc((-21.25, 2), (-22.3463763172, 0.5505102572), (-24.0784271247, 0))
            Line((-24.0784271247, 0), (-21.25, 0))
            Line((-21.25, 0), (-21.25, 2))
        make_face()
    extrude(amount=-F2_T135_DEPTH)

    split(bisect_by=Plane.YZ.offset(-34.5), keep=Keep.TOP)

    split(bisect_by=Plane.YZ.offset(-28), keep=Keep.BOTTOM)


with BuildPart() as f2_tool129_1:
    add(f2_tool129.part)

    # F2_t138: intersect F2_tool133
    add(f2_tool133.part, mode=Mode.INTERSECT)


with BuildPart() as f1_11:
    add(f1_10.part)

    # F2_t127: cut F2_tool129
    add(f2_tool129_1.part, mode=Mode.SUBTRACT)


with BuildPart() as f2_tool141:
    # F2_s142 → F2_t143 (new body)
    with BuildSketch(Plane.XZ.offset(21.25)):
        with BuildLine():
            ThreePointArc((-28, 2), (-29.0963763172, 0.5505102572), (-30.8284271247, 0))
            Line((-30.8284271247, 0), (-28, 0))
            Line((-28, 0), (-28, 2))
        make_face()
    extrude(amount=-F2_T143_DEPTH)

    split(bisect_by=Plane.XZ.offset(-22.75), keep=Keep.BOTTOM)


with BuildPart() as f2_tool145:
    # F2_s146 → F2_t147 (new body)
    with BuildSketch(Plane.YZ.offset(-35.0710678119)):
        with BuildLine():
            ThreePointArc((22.75, 2), (23.8463763172, 0.5505102572), (25.5784271247, 0))
            Line((25.5784271247, 0), (22.75, 0))
            Line((22.75, 0), (22.75, 2))
        make_face()
    extrude(amount=F2_T147_DEPTH)

    split(bisect_by=Plane.YZ.offset(-34.5), keep=Keep.TOP)

    split(bisect_by=Plane.YZ.offset(-28), keep=Keep.BOTTOM)


with BuildPart() as f2_tool141_1:
    add(f2_tool141.part)

    # F2_t150: intersect F2_tool145
    add(f2_tool145.part, mode=Mode.INTERSECT)


with BuildPart() as f1_12:
    add(f1_11.part)

    # F2_t139: cut F2_tool141
    add(f2_tool141_1.part, mode=Mode.SUBTRACT)


solid = f1_12.part
